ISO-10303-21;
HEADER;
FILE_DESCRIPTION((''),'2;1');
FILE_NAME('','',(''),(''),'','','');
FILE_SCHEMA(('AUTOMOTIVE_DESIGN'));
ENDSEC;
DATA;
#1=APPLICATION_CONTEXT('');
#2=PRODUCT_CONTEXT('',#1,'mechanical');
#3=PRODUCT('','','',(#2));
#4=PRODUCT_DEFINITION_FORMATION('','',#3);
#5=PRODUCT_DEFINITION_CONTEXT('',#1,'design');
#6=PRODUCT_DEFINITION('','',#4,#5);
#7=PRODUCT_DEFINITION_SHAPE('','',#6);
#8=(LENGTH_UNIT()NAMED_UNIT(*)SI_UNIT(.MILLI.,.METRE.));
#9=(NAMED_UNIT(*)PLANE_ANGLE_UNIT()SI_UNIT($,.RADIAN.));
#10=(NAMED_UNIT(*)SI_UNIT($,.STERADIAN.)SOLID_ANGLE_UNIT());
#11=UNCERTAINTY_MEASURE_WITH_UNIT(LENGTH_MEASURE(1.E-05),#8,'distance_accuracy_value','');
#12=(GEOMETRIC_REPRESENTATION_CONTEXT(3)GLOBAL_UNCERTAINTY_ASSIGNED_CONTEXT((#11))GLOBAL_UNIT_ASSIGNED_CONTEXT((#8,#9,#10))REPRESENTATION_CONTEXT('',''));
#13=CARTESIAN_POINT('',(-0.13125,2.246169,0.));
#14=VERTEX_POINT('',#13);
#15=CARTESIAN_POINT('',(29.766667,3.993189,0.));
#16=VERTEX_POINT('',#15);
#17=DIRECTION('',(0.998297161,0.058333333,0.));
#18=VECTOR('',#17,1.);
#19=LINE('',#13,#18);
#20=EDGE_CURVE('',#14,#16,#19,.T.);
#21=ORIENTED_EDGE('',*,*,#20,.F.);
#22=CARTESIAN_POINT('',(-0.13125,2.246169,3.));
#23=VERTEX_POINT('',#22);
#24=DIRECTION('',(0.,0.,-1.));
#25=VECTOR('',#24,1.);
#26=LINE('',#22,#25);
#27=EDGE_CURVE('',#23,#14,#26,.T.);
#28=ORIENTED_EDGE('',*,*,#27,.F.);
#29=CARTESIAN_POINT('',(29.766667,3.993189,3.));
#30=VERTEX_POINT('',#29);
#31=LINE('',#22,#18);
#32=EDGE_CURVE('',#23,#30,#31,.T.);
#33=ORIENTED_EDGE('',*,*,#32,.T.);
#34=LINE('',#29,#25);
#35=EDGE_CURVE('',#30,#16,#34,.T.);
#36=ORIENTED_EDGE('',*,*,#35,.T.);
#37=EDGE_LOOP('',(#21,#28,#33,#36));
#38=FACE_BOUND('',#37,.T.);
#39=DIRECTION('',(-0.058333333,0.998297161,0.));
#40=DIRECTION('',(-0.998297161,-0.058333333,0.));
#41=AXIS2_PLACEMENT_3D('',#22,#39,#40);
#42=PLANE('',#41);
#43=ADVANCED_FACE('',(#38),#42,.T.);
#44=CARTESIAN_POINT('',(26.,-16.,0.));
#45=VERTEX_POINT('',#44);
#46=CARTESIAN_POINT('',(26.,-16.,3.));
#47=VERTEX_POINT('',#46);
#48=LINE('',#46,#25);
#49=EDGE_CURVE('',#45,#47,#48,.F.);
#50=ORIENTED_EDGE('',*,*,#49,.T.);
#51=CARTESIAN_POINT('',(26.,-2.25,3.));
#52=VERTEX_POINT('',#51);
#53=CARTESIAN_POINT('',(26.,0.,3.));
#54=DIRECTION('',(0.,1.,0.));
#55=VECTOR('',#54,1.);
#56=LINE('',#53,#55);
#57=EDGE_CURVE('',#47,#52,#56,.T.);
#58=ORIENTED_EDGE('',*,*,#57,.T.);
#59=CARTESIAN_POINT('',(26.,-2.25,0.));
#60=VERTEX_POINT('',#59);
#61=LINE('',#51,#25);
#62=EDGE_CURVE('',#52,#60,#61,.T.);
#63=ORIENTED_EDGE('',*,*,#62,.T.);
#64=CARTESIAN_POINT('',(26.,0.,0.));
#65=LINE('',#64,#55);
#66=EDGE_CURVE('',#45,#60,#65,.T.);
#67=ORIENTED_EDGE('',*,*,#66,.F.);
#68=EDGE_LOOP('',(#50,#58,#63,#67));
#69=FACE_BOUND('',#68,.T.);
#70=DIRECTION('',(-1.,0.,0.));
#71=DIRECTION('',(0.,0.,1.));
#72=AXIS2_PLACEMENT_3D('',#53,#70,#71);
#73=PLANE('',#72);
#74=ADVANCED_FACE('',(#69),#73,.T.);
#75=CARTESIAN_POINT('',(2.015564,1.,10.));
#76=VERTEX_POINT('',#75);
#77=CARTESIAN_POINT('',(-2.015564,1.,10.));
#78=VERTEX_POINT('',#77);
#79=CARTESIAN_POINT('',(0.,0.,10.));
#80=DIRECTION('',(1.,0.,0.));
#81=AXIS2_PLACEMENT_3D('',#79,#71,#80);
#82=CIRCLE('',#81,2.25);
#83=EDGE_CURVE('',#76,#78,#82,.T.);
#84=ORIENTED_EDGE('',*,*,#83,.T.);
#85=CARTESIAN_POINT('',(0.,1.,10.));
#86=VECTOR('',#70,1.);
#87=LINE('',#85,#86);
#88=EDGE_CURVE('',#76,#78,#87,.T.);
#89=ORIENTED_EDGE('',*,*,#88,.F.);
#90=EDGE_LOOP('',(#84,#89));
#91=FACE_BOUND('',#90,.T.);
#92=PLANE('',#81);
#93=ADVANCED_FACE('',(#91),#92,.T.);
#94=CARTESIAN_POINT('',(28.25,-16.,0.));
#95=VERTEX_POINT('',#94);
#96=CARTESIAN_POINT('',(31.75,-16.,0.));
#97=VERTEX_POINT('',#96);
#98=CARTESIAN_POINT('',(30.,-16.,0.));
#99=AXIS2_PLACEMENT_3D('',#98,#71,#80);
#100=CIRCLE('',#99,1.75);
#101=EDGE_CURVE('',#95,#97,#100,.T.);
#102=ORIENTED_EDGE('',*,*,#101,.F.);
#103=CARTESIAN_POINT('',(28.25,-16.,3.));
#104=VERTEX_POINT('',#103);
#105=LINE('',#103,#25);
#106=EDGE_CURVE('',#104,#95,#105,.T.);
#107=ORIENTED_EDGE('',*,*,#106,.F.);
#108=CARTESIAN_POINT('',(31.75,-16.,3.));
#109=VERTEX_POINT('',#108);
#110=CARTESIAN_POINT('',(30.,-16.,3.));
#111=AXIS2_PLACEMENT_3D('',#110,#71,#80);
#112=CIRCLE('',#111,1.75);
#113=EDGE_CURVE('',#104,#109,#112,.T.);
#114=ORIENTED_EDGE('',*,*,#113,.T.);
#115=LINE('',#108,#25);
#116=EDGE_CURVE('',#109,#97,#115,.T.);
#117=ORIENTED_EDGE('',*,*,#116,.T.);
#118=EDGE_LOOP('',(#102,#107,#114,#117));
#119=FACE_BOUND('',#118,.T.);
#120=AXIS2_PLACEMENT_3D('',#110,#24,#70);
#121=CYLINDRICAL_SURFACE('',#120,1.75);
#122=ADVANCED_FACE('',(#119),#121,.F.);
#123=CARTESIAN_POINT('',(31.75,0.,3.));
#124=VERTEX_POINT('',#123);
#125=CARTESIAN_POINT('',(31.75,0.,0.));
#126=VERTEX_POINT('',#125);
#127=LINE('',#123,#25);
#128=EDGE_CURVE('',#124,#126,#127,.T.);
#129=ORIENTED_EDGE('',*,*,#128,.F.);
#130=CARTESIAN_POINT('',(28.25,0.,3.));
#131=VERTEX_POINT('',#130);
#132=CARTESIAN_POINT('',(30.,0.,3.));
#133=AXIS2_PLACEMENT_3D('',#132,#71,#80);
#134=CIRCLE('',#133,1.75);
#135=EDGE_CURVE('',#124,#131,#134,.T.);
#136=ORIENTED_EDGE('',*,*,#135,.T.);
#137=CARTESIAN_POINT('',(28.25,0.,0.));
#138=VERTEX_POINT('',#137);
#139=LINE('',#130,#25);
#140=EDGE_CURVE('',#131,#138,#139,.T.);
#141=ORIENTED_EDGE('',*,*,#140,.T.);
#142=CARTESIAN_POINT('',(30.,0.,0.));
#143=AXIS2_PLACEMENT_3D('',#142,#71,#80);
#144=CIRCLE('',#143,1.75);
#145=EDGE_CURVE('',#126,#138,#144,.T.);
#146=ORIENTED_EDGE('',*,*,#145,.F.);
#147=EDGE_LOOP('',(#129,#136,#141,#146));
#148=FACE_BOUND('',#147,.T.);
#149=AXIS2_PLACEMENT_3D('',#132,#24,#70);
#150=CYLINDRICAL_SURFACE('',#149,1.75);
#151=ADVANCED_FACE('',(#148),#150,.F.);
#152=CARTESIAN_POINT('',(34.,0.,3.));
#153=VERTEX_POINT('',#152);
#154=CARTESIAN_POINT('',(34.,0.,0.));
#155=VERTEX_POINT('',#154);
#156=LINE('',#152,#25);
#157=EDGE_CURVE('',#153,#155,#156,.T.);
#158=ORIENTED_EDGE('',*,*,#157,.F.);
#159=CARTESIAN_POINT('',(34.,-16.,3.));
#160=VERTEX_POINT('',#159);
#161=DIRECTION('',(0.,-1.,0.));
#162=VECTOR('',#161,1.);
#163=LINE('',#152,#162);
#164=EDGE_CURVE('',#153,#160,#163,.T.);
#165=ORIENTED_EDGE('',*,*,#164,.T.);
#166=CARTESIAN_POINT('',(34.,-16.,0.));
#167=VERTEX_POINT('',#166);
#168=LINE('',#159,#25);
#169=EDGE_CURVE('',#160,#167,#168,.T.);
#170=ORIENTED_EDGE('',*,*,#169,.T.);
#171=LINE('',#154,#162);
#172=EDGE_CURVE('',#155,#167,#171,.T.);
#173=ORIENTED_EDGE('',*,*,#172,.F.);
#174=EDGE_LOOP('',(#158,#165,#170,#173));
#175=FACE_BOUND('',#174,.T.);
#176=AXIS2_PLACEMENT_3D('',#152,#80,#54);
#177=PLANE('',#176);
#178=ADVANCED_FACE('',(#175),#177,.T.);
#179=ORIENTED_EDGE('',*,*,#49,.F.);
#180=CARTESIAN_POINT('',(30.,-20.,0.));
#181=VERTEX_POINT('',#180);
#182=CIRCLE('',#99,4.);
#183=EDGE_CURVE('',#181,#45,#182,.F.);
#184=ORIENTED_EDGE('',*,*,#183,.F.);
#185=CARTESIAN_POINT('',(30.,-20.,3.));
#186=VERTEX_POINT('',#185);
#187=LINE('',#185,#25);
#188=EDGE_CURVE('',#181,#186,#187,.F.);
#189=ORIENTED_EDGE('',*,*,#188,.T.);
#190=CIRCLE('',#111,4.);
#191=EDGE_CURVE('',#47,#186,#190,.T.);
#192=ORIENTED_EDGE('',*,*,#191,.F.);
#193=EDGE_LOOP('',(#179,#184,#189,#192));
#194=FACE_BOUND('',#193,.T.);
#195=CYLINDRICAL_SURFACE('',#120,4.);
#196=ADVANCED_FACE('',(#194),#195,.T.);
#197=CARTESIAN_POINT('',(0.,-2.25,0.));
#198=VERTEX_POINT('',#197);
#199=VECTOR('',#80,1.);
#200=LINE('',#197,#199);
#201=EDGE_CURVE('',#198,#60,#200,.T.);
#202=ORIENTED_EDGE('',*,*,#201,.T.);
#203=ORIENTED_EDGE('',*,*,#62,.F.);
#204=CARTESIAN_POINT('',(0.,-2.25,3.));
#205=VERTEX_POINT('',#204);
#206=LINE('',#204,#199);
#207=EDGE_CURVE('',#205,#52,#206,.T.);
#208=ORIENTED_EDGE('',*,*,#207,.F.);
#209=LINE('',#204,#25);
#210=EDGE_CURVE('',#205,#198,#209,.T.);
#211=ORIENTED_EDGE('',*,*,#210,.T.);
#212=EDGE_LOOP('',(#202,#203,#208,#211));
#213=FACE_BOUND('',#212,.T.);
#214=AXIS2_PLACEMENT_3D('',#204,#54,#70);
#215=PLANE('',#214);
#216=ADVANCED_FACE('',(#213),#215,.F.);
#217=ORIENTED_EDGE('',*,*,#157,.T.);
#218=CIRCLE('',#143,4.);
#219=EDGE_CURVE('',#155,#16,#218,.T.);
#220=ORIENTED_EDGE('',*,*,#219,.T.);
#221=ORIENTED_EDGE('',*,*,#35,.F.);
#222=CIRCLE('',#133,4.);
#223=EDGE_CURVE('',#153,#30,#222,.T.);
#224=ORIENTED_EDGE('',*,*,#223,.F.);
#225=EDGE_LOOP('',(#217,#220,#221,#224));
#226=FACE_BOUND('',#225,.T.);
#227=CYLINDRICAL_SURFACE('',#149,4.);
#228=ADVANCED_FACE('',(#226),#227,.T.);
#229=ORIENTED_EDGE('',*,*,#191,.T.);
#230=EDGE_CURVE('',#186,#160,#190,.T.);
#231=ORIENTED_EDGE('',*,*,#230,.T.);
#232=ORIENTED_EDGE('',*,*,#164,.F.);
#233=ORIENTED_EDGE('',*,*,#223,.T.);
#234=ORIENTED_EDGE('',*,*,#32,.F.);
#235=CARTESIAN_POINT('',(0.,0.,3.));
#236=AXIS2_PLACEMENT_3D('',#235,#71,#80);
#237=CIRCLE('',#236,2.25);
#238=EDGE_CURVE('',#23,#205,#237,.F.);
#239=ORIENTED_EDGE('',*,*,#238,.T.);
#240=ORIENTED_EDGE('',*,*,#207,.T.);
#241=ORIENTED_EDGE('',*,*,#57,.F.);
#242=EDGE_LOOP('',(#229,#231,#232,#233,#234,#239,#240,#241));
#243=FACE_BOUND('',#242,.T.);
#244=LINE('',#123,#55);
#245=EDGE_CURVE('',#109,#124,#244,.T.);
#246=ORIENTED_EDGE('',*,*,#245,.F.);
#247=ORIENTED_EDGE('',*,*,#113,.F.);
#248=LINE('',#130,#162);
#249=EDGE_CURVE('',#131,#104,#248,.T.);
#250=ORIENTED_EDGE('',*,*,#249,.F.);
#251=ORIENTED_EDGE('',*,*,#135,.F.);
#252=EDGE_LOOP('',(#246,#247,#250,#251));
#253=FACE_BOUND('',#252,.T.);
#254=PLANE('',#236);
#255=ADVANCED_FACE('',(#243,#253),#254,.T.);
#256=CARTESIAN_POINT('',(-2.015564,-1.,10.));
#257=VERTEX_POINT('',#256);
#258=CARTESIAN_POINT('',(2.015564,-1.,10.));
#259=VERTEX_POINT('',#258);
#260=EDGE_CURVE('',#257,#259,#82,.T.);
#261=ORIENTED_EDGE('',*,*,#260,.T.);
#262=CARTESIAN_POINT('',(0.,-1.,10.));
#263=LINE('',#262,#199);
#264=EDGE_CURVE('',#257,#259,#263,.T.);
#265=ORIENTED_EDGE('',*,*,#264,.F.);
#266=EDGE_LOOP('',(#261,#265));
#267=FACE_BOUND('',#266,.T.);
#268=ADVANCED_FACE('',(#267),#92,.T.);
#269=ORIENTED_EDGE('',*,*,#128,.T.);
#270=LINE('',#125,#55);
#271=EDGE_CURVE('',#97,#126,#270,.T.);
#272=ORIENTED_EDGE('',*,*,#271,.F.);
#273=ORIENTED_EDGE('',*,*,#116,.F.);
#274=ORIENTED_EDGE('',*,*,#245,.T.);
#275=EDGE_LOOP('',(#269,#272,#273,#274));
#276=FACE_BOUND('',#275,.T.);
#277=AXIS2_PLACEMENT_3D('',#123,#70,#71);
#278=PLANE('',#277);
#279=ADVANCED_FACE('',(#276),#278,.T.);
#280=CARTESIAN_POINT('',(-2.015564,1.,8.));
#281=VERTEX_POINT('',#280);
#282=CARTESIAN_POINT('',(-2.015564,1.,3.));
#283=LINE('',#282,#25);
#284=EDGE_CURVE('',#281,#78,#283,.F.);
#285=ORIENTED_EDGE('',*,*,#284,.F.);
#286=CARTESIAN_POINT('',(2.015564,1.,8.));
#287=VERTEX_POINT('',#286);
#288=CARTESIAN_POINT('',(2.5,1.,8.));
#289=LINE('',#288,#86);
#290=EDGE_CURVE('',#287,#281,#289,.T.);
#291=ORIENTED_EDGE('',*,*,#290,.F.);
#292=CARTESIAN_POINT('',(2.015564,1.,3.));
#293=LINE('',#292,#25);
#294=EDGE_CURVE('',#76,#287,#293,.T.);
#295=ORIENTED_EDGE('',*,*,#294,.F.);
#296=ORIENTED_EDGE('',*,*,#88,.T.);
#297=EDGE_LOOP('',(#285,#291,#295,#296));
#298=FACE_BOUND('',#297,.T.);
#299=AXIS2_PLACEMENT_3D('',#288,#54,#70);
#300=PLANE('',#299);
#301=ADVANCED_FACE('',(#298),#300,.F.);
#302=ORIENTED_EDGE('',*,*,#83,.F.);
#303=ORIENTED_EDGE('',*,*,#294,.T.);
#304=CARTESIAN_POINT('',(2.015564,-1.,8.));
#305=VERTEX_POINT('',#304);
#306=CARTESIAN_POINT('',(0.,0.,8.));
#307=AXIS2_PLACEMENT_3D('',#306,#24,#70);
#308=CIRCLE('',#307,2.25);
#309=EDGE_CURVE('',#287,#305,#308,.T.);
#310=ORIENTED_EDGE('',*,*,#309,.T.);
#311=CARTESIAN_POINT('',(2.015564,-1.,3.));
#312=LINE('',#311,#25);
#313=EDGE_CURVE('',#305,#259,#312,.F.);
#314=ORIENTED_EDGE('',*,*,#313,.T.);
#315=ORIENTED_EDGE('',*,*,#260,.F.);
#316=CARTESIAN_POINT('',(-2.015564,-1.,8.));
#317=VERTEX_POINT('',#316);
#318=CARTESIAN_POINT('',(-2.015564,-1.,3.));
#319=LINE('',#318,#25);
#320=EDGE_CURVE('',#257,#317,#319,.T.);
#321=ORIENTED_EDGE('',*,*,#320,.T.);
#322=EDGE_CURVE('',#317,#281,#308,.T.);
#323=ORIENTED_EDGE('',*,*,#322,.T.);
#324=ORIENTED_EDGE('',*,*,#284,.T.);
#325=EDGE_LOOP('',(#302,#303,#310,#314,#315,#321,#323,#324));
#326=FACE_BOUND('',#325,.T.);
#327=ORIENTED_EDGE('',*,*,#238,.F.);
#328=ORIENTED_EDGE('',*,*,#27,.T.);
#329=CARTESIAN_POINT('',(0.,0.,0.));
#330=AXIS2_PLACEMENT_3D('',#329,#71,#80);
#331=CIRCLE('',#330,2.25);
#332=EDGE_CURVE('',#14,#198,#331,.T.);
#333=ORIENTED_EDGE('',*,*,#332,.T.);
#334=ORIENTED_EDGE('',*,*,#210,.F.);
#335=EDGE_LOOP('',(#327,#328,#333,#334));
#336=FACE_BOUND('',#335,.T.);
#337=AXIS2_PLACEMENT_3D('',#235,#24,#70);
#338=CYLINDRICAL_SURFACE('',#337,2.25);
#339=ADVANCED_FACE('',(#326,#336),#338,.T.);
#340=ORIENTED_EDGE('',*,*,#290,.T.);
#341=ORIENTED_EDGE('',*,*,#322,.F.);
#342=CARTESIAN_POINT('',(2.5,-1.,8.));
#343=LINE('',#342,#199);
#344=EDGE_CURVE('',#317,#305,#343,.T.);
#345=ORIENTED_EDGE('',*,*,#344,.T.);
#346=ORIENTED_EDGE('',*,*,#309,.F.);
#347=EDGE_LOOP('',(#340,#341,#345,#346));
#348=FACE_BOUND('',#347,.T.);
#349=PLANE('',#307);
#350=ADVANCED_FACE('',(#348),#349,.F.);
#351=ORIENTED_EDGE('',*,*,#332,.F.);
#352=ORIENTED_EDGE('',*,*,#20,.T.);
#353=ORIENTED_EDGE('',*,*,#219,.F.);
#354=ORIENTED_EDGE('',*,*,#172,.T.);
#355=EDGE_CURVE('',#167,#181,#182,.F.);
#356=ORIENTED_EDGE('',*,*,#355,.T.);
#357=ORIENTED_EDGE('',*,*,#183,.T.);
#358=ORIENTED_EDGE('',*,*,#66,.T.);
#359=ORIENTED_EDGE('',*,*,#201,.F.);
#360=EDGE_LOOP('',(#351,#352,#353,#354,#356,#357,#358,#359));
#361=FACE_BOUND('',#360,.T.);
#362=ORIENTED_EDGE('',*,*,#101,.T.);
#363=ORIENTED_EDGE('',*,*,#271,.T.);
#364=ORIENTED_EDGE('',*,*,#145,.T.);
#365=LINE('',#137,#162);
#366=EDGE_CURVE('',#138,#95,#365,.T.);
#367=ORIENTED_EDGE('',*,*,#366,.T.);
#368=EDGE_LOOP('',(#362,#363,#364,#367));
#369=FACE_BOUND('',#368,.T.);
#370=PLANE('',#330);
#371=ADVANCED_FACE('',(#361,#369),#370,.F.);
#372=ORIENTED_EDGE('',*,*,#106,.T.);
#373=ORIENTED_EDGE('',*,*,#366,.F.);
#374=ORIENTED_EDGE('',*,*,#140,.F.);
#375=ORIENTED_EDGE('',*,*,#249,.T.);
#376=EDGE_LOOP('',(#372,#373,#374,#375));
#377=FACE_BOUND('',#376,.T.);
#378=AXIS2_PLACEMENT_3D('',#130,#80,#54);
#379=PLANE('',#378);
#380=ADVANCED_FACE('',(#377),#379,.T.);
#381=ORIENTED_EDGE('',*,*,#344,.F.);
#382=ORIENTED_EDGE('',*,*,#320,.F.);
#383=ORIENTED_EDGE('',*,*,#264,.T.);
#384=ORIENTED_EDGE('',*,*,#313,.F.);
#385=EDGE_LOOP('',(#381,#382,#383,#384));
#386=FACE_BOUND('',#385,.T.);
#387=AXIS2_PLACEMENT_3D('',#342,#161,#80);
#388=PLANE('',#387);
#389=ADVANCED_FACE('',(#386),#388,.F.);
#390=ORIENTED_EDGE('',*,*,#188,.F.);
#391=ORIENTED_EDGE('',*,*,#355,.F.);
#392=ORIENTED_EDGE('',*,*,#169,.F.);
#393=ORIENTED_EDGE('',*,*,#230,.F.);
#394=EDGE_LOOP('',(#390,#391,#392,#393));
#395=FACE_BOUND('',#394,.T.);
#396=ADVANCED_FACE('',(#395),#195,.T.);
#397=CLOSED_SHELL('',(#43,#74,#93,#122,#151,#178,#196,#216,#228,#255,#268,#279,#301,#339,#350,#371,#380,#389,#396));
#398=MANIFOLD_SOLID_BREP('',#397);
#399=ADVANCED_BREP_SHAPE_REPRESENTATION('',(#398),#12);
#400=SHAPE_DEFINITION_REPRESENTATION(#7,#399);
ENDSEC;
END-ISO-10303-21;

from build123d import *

# Parameters (mm, degrees)
EXTRUDE_1_DEPTH     = 3
SKETCH_1_3_R        = 2.25
EXTRUDE_2_DEPTH     = 10
SKETCH_2_W          = 5
SKETCH_2_H          = 2
CUT_EXTRUDE_1_DEPTH = 2
FILLET_1_R          = 4


with BuildPart() as part:
    # 草图1 → 凸台-拉伸1 (new body)
    with BuildSketch(Plane.XY):
        with BuildLine():
            Line((29.766666667, 3.993188645), (-0.13125, 2.246168613))
            ThreePointArc((-0.13125, 2.246168613), (-2.249041949, -0.065652955), (0, -2.25))
            Line((0, -2.25), (26, -2.25))
            Line((26, -2.25), (26, -20))
            Line((26, -20), (34, -20))
            Line((34, -20), (34, 0))
            ThreePointArc((34, 0), (32.744691847, 2.909753712), (29.766666667, 3.993188645))
        make_face()
        with BuildLine():
            Line((28.25, -16), (28.25, 0))
            ThreePointArc((28.25, 0), (30, 1.75), (31.75, 0))
            Line((31.75, 0), (31.75, -16))
            ThreePointArc((31.75, -16), (30, -17.75), (28.25, -16))
        make_face(mode=Mode.SUBTRACT)
    extrude(amount=EXTRUDE_1_DEPTH)

    # 草图1<3> → 凸台-拉伸2 (add)
    with BuildSketch(Plane.XY):
        with Locations(Location((0, 0, 0), (0, 0, 93.344152204))):
            Circle(SKETCH_1_3_R)
    extrude(amount=EXTRUDE_2_DEPTH)

    # 草图2 → 切除-拉伸1 (cut)
    with BuildSketch(Plane.XY.offset(10)):
        Rectangle(SKETCH_2_W, SKETCH_2_H)
    extrude(amount=-CUT_EXTRUDE_1_DEPTH, mode=Mode.SUBTRACT)

    # 圆角1
    fillet_1_edges = [part.edges().sort_by_distance(p)[0] for p in [
        (26, -20, 1.5),
        (34, -20, 1.5),
    ]]
    fillet(fillet_1_edges, radius=FILLET_1_R - 0.0001)  # a hair under: the kernel refuses the full size


solid = part.part
